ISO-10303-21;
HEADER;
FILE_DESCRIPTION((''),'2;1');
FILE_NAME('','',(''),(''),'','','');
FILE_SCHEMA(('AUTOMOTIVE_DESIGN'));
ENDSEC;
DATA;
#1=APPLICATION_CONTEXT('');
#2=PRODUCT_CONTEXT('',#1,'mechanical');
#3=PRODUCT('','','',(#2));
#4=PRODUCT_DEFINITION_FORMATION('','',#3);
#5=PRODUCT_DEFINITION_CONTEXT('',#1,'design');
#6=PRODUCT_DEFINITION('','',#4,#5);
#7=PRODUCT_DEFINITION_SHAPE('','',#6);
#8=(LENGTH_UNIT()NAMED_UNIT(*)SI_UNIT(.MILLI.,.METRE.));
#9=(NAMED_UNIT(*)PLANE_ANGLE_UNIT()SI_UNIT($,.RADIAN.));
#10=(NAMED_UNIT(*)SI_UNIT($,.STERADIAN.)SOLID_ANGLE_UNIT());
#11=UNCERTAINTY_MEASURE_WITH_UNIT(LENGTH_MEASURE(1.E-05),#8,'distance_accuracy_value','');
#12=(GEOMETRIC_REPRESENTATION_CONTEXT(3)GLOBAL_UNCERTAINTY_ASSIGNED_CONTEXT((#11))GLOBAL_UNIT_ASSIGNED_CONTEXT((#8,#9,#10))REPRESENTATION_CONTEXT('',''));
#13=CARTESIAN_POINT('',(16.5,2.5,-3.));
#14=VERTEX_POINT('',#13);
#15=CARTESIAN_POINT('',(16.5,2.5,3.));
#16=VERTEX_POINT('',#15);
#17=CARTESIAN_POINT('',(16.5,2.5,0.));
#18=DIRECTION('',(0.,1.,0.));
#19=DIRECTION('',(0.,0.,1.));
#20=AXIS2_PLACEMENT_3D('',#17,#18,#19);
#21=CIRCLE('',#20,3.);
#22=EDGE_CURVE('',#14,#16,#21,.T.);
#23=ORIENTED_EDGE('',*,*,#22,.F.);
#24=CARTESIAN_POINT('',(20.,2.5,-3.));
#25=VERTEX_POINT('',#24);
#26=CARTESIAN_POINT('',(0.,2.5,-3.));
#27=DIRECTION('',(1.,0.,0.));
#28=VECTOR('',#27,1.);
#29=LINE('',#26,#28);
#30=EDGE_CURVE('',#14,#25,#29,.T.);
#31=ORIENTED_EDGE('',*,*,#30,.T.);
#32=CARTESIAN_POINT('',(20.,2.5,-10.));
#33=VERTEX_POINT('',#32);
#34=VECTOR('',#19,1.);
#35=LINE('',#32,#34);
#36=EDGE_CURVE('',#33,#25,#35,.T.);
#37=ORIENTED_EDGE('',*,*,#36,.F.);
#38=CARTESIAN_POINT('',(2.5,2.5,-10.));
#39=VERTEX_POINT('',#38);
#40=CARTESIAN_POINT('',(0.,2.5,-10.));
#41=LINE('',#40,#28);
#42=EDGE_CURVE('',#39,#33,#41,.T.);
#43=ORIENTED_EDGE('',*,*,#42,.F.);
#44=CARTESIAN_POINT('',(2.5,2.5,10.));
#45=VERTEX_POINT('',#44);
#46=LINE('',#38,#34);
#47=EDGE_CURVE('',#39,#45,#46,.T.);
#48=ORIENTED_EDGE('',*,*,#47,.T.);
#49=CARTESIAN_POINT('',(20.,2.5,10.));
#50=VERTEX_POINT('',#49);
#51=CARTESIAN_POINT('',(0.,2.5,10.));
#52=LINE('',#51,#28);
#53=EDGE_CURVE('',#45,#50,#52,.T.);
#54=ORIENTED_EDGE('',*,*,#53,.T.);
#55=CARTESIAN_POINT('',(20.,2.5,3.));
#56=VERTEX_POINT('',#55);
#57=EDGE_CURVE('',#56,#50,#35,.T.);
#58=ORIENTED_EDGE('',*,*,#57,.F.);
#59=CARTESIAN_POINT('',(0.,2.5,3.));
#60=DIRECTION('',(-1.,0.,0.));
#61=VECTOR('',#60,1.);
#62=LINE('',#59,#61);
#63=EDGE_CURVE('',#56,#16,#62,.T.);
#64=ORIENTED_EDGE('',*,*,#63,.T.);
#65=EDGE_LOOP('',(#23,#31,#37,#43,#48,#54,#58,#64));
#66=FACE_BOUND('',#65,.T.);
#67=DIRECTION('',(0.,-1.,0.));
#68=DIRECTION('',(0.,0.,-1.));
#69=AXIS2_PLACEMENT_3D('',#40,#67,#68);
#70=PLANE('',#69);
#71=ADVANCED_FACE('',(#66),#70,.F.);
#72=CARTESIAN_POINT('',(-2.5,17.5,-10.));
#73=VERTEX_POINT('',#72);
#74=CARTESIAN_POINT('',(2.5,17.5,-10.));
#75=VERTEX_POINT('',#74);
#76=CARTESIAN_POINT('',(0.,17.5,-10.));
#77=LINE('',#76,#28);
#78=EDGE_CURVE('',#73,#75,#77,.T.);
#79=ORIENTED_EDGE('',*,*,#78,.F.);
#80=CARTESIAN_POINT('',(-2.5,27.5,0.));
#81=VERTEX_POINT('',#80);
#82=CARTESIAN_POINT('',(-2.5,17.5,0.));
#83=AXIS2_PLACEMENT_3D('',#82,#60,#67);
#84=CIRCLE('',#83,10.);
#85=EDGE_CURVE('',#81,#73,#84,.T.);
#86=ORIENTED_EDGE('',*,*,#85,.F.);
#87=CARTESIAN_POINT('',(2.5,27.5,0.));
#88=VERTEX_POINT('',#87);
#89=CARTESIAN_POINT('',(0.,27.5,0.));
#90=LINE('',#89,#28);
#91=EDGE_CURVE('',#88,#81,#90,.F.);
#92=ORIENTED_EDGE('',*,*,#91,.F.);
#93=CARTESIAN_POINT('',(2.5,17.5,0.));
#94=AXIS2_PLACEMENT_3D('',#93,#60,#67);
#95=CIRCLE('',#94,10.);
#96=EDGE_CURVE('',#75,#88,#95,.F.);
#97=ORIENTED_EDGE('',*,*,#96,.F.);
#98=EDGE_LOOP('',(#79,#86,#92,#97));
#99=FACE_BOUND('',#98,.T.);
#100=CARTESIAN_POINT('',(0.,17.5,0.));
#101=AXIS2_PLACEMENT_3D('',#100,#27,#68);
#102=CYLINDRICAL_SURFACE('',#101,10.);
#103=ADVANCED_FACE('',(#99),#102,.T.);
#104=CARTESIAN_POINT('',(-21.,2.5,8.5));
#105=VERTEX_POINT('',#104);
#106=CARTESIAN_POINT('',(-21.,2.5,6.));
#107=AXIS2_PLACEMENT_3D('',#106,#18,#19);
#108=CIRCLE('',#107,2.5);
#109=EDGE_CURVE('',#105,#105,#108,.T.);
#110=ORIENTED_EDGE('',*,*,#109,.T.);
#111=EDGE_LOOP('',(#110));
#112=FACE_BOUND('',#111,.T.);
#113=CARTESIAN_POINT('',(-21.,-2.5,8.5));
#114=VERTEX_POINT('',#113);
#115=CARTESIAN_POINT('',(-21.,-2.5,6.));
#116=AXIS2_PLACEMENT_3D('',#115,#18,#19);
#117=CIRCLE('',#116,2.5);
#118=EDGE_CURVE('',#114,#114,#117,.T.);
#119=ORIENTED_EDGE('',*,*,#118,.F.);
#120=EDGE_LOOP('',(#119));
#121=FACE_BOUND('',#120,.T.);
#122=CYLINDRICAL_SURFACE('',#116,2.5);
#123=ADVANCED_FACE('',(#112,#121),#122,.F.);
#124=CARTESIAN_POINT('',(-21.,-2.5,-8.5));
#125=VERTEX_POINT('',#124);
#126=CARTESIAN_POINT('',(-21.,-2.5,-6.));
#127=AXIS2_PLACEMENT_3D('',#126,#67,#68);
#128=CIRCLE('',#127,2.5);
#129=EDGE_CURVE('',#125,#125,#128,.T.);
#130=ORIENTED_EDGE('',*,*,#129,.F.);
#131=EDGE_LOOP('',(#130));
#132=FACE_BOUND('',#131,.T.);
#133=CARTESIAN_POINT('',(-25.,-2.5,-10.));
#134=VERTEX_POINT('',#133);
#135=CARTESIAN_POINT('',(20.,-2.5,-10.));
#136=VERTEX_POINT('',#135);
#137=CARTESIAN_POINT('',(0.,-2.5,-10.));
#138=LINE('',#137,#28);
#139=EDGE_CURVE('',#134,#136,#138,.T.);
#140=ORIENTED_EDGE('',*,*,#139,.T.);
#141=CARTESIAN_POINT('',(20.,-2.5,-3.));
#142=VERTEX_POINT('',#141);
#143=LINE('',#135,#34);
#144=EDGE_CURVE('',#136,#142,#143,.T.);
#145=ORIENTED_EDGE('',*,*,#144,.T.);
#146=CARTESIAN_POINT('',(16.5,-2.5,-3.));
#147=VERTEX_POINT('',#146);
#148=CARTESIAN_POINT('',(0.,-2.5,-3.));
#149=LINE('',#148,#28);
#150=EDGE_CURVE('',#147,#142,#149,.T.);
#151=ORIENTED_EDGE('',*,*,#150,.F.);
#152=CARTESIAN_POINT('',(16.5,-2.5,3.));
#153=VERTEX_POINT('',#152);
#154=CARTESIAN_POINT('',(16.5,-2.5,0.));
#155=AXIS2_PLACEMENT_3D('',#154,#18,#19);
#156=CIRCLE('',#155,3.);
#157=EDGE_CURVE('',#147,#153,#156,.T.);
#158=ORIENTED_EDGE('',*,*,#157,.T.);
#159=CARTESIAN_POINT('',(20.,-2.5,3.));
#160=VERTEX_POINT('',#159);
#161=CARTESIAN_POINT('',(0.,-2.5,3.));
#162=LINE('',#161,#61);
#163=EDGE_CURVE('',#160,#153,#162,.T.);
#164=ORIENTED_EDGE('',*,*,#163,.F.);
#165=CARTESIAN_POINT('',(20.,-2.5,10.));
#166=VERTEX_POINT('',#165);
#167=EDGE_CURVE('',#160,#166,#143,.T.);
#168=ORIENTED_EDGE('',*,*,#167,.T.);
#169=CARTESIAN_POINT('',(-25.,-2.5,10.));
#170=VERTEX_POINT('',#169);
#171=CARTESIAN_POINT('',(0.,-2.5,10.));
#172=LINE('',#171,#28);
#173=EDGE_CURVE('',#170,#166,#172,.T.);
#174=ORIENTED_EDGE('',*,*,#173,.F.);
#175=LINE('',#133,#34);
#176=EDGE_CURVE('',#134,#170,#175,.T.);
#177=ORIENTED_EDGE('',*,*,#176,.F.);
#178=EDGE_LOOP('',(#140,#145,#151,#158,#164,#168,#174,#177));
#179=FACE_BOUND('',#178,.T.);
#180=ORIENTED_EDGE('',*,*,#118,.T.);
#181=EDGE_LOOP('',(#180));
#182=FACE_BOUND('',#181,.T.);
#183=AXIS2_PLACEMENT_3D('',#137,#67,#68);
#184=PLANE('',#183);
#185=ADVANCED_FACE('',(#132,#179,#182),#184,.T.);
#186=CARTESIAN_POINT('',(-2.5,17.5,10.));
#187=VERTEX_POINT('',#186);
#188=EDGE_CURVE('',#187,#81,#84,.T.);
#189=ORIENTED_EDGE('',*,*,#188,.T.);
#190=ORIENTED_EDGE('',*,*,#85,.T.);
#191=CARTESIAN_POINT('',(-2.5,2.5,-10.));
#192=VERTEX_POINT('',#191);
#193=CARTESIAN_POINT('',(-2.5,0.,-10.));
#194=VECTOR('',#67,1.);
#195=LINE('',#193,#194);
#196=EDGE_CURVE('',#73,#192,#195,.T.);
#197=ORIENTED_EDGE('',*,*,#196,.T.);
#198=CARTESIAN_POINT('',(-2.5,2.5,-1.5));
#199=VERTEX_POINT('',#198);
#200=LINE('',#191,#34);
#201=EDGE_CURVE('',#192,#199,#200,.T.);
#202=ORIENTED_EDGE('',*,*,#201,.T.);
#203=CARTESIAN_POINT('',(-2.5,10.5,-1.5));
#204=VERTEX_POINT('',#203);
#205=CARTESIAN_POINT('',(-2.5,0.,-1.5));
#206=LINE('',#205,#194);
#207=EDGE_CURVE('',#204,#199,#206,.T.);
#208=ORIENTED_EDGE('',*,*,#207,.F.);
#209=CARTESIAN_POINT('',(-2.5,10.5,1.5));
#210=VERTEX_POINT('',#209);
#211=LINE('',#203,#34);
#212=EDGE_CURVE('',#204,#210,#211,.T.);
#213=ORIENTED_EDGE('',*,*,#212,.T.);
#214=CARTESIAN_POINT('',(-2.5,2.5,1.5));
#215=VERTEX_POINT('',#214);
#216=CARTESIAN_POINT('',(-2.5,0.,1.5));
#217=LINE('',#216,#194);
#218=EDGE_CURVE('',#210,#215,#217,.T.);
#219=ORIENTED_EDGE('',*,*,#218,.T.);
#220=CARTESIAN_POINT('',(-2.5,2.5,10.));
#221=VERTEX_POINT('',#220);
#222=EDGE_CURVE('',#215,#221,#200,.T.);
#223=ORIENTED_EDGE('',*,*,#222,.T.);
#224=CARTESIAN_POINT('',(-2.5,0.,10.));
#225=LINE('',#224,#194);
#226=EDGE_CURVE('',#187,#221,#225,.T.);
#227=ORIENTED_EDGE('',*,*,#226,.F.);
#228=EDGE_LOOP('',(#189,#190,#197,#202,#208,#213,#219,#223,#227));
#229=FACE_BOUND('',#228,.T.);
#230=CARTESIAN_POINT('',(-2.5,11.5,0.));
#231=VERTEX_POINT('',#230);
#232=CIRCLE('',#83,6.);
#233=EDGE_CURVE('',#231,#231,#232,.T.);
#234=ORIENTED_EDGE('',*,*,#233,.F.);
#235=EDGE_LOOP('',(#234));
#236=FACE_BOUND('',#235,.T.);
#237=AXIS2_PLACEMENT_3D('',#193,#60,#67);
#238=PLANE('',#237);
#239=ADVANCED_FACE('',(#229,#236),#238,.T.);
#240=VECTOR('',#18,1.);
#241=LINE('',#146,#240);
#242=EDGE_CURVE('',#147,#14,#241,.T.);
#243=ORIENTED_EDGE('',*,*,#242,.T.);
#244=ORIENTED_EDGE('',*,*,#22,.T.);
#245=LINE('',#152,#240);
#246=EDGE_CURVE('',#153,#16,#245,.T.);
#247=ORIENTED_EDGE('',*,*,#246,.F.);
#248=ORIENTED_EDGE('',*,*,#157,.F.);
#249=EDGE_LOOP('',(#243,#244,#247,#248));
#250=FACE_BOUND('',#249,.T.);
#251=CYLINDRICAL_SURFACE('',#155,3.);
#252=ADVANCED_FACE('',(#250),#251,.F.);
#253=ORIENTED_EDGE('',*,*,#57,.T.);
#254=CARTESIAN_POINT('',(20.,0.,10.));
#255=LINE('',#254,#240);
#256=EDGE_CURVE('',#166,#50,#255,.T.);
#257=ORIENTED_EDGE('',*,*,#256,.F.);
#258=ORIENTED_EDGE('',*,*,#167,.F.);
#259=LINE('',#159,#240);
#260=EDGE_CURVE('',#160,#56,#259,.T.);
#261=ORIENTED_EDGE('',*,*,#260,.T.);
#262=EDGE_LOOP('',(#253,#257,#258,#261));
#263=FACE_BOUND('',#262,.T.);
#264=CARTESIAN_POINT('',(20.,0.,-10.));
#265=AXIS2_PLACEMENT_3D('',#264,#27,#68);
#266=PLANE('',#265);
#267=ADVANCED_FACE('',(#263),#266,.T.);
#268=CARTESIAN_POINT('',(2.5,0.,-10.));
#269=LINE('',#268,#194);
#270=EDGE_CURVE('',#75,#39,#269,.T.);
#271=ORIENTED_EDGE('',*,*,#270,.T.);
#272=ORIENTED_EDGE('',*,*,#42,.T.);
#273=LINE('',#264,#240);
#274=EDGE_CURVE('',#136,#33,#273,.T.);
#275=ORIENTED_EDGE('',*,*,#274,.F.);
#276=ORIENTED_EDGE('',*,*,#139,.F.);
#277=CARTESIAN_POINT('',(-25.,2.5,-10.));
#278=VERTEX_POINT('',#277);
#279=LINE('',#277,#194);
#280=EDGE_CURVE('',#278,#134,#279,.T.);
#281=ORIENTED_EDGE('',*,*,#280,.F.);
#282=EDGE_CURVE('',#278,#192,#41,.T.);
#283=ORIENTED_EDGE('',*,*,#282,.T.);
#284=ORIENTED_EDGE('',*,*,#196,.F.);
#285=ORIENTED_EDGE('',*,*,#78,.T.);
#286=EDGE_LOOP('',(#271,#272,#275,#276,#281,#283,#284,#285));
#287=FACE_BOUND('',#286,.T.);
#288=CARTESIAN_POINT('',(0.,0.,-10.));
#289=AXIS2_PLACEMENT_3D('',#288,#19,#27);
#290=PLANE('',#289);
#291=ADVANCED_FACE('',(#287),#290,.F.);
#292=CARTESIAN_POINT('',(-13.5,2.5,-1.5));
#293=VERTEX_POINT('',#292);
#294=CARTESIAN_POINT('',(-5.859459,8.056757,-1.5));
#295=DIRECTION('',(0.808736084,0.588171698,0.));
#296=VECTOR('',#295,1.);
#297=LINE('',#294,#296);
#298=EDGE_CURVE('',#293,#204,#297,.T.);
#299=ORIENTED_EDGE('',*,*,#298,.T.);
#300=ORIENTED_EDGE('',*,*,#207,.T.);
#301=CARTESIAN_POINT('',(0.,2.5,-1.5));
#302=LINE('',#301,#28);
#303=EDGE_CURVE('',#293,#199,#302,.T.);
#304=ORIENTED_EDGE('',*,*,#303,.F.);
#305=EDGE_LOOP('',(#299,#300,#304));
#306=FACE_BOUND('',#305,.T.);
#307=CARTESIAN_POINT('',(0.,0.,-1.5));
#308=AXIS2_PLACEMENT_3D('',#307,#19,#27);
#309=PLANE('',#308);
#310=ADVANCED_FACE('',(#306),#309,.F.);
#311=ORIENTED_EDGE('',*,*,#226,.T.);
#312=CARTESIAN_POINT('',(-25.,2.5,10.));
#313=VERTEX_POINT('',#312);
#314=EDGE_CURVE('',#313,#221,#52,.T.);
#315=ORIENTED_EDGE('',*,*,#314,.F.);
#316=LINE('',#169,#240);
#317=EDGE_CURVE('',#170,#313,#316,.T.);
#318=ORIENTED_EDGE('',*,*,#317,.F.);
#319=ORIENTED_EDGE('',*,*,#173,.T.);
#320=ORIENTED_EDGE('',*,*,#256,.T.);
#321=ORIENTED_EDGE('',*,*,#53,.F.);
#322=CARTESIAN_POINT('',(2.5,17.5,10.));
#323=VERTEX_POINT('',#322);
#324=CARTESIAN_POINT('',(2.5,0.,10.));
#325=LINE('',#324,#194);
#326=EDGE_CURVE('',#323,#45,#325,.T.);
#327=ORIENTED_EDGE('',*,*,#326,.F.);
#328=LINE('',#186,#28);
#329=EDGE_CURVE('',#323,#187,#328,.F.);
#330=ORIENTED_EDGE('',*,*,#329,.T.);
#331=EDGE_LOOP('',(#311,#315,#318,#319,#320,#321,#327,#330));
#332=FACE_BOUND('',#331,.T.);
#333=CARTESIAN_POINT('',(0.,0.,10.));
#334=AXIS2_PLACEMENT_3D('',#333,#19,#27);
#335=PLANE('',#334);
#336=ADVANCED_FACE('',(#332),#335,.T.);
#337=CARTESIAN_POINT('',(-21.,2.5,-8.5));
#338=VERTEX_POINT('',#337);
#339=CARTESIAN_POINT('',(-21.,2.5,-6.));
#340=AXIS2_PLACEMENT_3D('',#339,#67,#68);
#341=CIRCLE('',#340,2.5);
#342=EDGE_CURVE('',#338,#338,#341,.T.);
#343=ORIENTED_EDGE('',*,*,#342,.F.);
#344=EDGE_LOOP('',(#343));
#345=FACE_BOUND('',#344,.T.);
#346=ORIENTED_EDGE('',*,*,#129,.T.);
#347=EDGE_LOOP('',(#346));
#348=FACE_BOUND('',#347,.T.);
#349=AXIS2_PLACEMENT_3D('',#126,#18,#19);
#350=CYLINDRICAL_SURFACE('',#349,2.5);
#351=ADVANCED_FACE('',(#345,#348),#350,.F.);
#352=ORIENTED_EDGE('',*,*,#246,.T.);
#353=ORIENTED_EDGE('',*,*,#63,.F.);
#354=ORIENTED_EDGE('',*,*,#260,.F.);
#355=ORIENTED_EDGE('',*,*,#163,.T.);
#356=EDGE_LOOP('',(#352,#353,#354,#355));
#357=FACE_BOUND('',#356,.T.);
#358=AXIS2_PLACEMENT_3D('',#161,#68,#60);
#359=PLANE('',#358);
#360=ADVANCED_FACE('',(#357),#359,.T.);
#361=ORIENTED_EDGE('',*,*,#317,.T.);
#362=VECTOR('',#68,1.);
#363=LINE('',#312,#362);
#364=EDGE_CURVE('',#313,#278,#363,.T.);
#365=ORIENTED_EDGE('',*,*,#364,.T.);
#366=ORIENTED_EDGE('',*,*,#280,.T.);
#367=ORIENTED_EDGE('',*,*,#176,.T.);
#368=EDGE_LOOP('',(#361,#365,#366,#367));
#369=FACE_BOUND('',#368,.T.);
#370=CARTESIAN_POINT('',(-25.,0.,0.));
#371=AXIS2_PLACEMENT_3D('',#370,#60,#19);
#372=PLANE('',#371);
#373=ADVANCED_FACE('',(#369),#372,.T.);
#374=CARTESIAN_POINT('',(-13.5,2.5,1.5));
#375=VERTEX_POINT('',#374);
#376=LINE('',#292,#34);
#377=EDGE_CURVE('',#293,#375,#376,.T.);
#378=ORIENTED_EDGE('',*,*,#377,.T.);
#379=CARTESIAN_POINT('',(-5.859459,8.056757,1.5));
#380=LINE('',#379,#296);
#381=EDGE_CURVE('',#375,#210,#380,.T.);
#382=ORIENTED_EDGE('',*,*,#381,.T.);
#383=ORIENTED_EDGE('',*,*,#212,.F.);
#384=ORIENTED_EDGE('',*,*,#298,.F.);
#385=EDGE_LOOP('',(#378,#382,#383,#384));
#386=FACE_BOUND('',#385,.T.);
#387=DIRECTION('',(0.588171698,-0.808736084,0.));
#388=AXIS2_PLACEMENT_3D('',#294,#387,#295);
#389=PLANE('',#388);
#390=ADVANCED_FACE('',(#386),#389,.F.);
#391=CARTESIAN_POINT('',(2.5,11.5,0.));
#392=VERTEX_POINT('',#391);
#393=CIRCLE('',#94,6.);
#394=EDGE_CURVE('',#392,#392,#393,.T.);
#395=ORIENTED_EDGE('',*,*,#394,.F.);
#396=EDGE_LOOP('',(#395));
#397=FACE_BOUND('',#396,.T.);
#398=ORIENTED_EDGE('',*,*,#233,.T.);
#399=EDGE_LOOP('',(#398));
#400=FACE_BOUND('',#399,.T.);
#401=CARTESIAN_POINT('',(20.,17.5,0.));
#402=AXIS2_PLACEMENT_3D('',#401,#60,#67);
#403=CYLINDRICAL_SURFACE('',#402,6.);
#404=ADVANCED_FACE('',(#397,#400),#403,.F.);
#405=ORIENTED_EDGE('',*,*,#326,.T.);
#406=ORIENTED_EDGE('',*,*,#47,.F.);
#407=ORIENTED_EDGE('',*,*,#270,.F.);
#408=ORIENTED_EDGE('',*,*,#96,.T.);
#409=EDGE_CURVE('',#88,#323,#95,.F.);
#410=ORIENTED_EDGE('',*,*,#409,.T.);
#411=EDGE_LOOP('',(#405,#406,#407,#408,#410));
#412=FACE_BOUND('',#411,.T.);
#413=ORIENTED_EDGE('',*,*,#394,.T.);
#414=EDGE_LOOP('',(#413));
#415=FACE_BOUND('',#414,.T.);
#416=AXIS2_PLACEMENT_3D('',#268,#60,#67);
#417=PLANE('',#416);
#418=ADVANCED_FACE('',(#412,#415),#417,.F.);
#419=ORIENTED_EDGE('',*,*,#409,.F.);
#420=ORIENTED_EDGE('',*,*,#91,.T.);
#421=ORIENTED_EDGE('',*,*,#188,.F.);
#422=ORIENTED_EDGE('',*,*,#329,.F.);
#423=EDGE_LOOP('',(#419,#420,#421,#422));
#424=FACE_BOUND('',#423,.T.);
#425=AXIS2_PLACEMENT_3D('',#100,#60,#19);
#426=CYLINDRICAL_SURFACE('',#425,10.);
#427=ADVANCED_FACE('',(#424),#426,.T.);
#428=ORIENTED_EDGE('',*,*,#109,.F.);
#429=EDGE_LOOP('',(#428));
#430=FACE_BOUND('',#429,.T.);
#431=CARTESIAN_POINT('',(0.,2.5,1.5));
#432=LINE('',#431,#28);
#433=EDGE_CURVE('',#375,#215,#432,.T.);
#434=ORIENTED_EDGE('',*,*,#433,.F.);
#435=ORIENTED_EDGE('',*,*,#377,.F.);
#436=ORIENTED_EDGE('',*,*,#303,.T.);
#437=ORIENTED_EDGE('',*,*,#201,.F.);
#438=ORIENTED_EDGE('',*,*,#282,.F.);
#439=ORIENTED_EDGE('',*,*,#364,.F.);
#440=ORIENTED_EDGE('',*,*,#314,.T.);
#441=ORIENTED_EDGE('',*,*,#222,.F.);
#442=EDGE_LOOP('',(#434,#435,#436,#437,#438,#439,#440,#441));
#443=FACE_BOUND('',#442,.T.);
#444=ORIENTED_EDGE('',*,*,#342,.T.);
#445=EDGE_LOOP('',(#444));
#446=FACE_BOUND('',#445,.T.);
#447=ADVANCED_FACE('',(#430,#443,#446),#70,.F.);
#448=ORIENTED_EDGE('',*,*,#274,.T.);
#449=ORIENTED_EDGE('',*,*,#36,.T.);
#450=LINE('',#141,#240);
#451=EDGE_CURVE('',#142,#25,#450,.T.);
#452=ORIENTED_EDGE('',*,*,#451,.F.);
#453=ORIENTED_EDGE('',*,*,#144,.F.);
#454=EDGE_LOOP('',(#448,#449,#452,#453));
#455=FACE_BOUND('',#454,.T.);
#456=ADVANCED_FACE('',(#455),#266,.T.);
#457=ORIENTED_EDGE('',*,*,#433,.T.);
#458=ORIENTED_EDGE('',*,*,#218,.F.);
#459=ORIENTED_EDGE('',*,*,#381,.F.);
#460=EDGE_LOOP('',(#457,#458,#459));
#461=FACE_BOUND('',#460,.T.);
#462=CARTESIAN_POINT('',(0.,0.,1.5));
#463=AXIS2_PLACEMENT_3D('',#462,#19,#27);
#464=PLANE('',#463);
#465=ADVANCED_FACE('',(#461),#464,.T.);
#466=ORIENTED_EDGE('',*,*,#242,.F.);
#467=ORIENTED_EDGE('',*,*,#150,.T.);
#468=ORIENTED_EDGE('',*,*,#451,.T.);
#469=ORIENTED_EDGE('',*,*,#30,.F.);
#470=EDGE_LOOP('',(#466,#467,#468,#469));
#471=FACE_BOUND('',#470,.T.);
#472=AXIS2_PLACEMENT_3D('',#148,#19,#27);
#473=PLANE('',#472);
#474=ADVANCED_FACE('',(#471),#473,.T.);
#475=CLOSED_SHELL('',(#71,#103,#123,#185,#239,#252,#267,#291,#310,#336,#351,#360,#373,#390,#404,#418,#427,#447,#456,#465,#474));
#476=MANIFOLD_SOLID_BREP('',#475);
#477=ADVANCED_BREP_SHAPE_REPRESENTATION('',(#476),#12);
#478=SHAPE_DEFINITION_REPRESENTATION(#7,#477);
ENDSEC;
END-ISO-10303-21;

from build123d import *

# Parameters (mm, degrees)
EXTRUDE_1_DEPTH      = 10
EXTRUDE_1_DEPTH_BACK = 10
SKETCH_1_W           = 40
SKETCH_1_H           = 5
EXTRUDE_2_DEPTH      = 1.5
EXTRUDE_2_DEPTH_BACK = 1.5
FILLET_1_R           = 10
SKETCH_2_R           = 6
CUT_EXTRUDE_1_DEPTH  = 37.912057651
SKETCH_4_R           = 3
CUT_EXTRUDE_3_DEPTH  = 34.541019662
SKETCH_5_W           = 20
SKETCH_5_H           = 5
EXTRUDE_3_DEPTH      = 5
SKETCH_3_R           = 2.5
CUT_EXTRUDE_4_DEPTH  = 37.742346142


with BuildPart() as part:
    # Эскиз1 → Бобышка-Вытянуть1 (new, two sides: drawn at the far end of the back side and taken through both)
    with BuildSketch(Plane.XY.offset(-EXTRUDE_1_DEPTH_BACK)):
        Rectangle(SKETCH_1_W, SKETCH_1_H)
        Polygon((-2.5, 27.5), (-2.5, 10.5), (-2.5, 2.5), (2.5, 2.5), (2.5, 27.5), align=None)
    extrude(amount=EXTRUDE_1_DEPTH + EXTRUDE_1_DEPTH_BACK)

    # Эскиз1<3> → Бобышка-Вытянуть2 (add, two sides: drawn at the far end of the back side and taken through both)
    with BuildSketch(Plane.XY.offset(-EXTRUDE_2_DEPTH_BACK)):
        Polygon((-2.5, 10.5), (-13.5, 2.5), (-2.5, 2.5), align=None)
    extrude(amount=EXTRUDE_2_DEPTH + EXTRUDE_2_DEPTH_BACK)

    # Скругление1
    fillet_1_edges = [part.edges().sort_by_distance(p)[0] for p in [
        (0, 27.5, 10),
        (0, 27.5, -10),
    ]]
    fillet(fillet_1_edges, radius=FILLET_1_R - 0.0001)  # a hair under: the kernel refuses the full size

    # Эскиз2 → Вырез-Вытянуть1 (cut, through all)
    with BuildSketch(Plane.ZY.offset(2.5)):
        with Locations(Location((0, 17.5, 0), (0, 0, 270))):
            Circle(SKETCH_2_R)
    extrude(amount=-CUT_EXTRUDE_1_DEPTH, mode=Mode.SUBTRACT)

    # Эскиз4 → Вырез-Вытянуть3 (cut, through all)
    with BuildSketch(Plane(origin=(0, 2.5, 0), x_dir=(1, 0, 0), z_dir=(0, 1, 0))):
        with BuildLine():
            Line((20, 3), (16.5, 3))
            ThreePointArc((16.5, 3), (18.621320344, 2.121320344), (19.5, 0))
            ThreePointArc((19.5, 0), (18.621320344, -2.121320344), (16.5, -3))
            Line((16.5, -3), (20, -3))
            Line((20, -3), (20, 3))
        make_face()
        with Locations((16.5, 0)):
            Circle(SKETCH_4_R)
    extrude(amount=-CUT_EXTRUDE_3_DEPTH, mode=Mode.SUBTRACT)

    # Эскиз5 → Бобышка-Вытянуть3 (add)
    with BuildSketch(Plane.ZY.offset(20)):
        Rectangle(SKETCH_5_W, SKETCH_5_H)
    extrude(amount=EXTRUDE_3_DEPTH)

    # Эскиз3 → Вырез-Вытянуть4 (cut, through all)
    with BuildSketch(Plane(origin=(0, 2.5, 0), x_dir=(1, 0, 0), z_dir=(0, 1, 0))):
        with Locations(Location((-21, -6, 0), (0, 0, 270))):
            Circle(SKETCH_3_R)
    cut_extrude_4 = extrude(amount=-CUT_EXTRUDE_4_DEPTH, mode=Mode.SUBTRACT)

    # Зеркальное отражение1: Вырез-Вытянуть4 across plane
    add(cut_extrude_4.mirror(Plane.XY), mode=Mode.SUBTRACT)


solid = part.part
